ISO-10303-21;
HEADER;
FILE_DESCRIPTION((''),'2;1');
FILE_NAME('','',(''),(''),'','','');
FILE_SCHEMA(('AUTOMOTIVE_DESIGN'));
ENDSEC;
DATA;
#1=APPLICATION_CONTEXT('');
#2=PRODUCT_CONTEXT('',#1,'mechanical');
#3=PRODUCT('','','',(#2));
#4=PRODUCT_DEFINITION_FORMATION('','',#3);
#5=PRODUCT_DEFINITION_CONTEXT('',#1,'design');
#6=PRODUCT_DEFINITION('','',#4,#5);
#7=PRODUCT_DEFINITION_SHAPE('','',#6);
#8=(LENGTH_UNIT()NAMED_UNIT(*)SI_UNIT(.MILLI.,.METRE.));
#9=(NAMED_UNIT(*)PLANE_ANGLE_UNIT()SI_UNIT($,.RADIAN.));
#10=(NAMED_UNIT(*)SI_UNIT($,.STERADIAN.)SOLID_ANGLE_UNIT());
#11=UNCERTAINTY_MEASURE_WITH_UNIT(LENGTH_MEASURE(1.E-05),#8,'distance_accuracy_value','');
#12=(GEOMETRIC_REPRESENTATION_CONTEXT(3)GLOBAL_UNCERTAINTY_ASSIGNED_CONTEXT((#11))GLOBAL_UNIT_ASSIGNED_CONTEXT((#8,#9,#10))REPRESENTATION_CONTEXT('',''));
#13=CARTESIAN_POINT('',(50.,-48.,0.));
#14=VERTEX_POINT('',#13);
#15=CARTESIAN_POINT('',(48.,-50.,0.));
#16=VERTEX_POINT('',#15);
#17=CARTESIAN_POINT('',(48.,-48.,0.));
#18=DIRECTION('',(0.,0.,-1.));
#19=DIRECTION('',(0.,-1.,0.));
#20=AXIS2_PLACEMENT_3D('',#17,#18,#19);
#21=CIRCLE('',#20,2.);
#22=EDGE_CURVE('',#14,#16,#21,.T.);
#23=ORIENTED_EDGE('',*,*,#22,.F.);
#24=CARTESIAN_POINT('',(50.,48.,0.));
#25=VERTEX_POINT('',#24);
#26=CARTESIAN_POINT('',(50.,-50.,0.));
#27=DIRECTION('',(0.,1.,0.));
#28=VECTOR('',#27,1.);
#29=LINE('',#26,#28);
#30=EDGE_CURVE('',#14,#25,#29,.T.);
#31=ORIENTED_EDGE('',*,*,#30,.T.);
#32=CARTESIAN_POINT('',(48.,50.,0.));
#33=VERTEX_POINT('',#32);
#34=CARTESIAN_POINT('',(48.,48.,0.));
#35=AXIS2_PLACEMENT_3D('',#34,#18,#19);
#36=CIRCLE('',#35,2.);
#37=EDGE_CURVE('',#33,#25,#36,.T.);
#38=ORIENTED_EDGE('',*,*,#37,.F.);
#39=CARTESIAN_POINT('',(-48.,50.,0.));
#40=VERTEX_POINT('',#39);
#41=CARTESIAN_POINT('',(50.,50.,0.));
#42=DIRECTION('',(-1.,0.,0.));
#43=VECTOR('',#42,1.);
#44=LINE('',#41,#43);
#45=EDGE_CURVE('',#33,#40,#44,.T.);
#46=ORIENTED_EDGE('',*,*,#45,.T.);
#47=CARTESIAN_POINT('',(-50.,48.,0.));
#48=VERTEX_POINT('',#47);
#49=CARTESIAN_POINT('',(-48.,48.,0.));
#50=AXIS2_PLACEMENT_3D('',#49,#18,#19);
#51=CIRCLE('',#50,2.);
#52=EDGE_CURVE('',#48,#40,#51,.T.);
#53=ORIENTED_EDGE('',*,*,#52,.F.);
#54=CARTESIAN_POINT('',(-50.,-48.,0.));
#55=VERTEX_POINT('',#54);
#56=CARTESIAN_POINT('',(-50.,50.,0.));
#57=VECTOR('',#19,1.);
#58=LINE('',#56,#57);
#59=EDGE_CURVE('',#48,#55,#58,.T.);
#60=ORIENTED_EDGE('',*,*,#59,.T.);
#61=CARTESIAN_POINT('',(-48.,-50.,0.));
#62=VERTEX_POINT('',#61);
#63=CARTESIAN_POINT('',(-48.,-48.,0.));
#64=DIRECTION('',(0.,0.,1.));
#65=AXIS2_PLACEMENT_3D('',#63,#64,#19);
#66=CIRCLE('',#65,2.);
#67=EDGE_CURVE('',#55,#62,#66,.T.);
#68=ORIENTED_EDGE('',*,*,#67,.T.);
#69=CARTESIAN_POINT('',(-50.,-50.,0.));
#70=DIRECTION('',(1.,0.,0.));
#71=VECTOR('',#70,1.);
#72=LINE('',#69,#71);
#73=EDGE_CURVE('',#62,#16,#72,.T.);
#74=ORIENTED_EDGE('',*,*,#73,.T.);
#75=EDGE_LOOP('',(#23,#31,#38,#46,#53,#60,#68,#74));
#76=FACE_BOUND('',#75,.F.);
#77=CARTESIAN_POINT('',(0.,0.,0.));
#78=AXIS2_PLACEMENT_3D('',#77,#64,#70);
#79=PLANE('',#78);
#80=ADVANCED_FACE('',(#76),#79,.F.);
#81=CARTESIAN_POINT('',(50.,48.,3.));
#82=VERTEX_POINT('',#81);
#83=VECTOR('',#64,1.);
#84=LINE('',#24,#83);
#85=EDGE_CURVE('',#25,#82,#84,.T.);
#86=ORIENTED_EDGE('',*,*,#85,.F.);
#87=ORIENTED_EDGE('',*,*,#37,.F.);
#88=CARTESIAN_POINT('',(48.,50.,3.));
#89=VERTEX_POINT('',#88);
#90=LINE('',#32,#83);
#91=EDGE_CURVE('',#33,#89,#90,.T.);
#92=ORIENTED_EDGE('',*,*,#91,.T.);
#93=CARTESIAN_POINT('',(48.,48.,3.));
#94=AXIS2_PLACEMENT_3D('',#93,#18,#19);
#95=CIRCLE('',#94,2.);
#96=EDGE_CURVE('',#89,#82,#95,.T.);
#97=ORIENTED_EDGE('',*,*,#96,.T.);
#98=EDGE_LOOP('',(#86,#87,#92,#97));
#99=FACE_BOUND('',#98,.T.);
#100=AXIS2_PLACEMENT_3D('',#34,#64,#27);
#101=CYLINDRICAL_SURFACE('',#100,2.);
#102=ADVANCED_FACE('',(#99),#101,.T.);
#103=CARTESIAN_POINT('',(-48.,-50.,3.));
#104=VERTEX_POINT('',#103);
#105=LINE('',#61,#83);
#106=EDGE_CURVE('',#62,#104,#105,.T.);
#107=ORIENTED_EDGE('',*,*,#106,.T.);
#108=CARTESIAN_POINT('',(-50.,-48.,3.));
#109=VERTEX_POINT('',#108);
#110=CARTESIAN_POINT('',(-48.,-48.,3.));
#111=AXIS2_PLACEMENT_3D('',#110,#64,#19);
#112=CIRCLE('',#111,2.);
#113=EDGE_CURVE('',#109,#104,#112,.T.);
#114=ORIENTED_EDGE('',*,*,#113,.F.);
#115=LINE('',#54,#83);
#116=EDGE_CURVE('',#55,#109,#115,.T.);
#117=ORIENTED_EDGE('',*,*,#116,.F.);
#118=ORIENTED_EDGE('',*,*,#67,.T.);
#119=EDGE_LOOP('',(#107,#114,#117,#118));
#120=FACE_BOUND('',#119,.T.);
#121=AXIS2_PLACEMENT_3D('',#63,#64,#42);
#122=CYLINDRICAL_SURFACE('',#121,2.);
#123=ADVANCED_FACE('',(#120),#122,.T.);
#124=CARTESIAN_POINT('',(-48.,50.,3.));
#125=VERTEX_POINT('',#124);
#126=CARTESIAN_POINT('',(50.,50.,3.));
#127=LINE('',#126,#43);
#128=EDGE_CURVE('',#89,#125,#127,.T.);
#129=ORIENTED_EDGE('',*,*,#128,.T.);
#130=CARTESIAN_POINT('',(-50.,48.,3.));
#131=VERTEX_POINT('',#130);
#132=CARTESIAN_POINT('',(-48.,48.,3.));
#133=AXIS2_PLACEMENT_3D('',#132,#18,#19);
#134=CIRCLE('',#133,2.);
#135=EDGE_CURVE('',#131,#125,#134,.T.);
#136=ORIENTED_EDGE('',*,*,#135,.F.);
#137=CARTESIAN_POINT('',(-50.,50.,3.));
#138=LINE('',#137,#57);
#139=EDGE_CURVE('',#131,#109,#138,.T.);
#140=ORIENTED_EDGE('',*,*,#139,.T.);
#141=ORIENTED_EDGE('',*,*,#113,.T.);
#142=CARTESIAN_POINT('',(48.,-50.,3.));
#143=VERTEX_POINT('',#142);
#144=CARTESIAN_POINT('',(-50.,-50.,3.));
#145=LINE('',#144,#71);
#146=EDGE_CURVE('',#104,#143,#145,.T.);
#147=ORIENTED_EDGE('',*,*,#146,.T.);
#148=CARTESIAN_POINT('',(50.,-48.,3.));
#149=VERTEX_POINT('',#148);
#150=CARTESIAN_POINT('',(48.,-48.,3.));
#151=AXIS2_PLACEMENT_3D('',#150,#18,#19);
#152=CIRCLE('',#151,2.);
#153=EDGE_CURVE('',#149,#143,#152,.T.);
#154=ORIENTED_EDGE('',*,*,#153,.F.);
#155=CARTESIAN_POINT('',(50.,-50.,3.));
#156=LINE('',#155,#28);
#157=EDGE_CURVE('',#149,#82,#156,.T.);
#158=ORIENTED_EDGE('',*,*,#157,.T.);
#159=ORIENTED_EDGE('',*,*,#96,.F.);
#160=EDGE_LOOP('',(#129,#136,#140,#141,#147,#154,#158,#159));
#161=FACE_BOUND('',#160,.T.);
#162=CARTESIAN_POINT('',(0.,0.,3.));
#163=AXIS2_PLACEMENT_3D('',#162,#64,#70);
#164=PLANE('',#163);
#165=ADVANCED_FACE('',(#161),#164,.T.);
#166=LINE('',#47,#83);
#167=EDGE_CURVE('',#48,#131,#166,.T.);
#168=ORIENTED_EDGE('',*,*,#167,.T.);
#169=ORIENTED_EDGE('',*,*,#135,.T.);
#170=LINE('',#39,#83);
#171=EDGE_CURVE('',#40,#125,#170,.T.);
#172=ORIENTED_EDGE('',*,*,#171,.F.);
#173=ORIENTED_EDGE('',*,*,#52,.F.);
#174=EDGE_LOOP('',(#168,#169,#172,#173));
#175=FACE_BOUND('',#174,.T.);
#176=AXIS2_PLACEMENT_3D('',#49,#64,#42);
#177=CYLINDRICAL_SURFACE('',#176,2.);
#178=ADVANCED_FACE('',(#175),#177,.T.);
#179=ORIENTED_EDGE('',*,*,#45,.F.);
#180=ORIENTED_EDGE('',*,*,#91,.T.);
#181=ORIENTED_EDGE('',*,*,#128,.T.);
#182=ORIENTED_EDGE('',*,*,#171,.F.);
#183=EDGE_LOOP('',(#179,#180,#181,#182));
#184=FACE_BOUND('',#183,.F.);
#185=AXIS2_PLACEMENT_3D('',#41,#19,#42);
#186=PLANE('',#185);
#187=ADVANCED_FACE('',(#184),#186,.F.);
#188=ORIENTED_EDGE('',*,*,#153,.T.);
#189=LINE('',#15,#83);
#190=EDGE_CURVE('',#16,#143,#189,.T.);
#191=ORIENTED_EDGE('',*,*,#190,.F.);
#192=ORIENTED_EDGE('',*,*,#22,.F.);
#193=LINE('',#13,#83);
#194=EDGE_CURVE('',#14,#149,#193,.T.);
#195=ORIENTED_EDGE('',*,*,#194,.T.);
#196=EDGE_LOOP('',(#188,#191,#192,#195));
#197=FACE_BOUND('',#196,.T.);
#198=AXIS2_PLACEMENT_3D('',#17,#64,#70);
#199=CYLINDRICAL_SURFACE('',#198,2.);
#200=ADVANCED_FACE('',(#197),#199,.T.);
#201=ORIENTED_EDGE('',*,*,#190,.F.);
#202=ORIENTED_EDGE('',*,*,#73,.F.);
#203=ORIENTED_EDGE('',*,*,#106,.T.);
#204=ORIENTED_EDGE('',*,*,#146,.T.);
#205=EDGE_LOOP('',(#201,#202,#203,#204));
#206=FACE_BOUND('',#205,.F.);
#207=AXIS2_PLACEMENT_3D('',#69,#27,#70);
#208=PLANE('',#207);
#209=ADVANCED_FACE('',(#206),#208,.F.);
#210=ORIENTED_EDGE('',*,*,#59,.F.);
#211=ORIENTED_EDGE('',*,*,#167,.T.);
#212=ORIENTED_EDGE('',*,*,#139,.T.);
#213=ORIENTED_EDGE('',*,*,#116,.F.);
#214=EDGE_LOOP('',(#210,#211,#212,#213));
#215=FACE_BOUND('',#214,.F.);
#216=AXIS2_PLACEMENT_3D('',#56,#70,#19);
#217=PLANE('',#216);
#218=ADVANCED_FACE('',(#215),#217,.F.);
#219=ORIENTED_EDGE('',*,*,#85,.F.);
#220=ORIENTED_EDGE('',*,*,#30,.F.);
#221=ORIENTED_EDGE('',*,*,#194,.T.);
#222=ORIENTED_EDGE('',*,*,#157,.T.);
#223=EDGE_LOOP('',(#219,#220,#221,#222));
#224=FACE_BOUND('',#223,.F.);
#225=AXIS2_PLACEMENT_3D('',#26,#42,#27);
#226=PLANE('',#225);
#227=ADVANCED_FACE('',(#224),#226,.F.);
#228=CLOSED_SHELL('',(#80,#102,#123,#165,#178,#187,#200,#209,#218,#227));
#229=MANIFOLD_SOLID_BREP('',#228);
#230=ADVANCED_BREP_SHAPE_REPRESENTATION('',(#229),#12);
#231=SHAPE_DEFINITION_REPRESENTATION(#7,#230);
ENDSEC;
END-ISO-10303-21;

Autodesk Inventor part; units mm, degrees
ref_plane "YZ Plane" through (0, 0, 0) normal (1, 0, 0) x (0, 1, 0)
ref_plane "XZ Plane" through (0, 0, 0) normal (0, 1, 0) x (-1, 0, 0)
ref_plane "XY Plane" through (0, 0, 0) normal (0, 0, 1) x (1, 0, 0)
sketch "Sketch1" plane through (0, 0, 0) normal (0, 0, 1) x (1, 0, 0)
  line L0 (-50, -50) -> (50, -50)
  line L1 (50, -50) -> (50, 50)
  line L2 (50, 50) -> (-50, 50)
  line L3 (-50, 50) -> (-50, -50)
  line L4 (-50, -50) -> (50, 50) construction
  line L5 (50, -50) -> (-50, 50) construction
  point P0 (0, 0)
  dimension "d154" = 100
  dimension "d155" = 100
extrude "Plate5" add sketch "Sketch1" along normal blind 3
fillet "Corner Round1" radius 2 4 edges at (50, 50, 1.5) (-50, 50, 1.5) (-50, -50, 1.5) (50, -50, 1.5)
properties part number "PNS 765 FDS 1200 CUP 1" material "Stainless Steel"
